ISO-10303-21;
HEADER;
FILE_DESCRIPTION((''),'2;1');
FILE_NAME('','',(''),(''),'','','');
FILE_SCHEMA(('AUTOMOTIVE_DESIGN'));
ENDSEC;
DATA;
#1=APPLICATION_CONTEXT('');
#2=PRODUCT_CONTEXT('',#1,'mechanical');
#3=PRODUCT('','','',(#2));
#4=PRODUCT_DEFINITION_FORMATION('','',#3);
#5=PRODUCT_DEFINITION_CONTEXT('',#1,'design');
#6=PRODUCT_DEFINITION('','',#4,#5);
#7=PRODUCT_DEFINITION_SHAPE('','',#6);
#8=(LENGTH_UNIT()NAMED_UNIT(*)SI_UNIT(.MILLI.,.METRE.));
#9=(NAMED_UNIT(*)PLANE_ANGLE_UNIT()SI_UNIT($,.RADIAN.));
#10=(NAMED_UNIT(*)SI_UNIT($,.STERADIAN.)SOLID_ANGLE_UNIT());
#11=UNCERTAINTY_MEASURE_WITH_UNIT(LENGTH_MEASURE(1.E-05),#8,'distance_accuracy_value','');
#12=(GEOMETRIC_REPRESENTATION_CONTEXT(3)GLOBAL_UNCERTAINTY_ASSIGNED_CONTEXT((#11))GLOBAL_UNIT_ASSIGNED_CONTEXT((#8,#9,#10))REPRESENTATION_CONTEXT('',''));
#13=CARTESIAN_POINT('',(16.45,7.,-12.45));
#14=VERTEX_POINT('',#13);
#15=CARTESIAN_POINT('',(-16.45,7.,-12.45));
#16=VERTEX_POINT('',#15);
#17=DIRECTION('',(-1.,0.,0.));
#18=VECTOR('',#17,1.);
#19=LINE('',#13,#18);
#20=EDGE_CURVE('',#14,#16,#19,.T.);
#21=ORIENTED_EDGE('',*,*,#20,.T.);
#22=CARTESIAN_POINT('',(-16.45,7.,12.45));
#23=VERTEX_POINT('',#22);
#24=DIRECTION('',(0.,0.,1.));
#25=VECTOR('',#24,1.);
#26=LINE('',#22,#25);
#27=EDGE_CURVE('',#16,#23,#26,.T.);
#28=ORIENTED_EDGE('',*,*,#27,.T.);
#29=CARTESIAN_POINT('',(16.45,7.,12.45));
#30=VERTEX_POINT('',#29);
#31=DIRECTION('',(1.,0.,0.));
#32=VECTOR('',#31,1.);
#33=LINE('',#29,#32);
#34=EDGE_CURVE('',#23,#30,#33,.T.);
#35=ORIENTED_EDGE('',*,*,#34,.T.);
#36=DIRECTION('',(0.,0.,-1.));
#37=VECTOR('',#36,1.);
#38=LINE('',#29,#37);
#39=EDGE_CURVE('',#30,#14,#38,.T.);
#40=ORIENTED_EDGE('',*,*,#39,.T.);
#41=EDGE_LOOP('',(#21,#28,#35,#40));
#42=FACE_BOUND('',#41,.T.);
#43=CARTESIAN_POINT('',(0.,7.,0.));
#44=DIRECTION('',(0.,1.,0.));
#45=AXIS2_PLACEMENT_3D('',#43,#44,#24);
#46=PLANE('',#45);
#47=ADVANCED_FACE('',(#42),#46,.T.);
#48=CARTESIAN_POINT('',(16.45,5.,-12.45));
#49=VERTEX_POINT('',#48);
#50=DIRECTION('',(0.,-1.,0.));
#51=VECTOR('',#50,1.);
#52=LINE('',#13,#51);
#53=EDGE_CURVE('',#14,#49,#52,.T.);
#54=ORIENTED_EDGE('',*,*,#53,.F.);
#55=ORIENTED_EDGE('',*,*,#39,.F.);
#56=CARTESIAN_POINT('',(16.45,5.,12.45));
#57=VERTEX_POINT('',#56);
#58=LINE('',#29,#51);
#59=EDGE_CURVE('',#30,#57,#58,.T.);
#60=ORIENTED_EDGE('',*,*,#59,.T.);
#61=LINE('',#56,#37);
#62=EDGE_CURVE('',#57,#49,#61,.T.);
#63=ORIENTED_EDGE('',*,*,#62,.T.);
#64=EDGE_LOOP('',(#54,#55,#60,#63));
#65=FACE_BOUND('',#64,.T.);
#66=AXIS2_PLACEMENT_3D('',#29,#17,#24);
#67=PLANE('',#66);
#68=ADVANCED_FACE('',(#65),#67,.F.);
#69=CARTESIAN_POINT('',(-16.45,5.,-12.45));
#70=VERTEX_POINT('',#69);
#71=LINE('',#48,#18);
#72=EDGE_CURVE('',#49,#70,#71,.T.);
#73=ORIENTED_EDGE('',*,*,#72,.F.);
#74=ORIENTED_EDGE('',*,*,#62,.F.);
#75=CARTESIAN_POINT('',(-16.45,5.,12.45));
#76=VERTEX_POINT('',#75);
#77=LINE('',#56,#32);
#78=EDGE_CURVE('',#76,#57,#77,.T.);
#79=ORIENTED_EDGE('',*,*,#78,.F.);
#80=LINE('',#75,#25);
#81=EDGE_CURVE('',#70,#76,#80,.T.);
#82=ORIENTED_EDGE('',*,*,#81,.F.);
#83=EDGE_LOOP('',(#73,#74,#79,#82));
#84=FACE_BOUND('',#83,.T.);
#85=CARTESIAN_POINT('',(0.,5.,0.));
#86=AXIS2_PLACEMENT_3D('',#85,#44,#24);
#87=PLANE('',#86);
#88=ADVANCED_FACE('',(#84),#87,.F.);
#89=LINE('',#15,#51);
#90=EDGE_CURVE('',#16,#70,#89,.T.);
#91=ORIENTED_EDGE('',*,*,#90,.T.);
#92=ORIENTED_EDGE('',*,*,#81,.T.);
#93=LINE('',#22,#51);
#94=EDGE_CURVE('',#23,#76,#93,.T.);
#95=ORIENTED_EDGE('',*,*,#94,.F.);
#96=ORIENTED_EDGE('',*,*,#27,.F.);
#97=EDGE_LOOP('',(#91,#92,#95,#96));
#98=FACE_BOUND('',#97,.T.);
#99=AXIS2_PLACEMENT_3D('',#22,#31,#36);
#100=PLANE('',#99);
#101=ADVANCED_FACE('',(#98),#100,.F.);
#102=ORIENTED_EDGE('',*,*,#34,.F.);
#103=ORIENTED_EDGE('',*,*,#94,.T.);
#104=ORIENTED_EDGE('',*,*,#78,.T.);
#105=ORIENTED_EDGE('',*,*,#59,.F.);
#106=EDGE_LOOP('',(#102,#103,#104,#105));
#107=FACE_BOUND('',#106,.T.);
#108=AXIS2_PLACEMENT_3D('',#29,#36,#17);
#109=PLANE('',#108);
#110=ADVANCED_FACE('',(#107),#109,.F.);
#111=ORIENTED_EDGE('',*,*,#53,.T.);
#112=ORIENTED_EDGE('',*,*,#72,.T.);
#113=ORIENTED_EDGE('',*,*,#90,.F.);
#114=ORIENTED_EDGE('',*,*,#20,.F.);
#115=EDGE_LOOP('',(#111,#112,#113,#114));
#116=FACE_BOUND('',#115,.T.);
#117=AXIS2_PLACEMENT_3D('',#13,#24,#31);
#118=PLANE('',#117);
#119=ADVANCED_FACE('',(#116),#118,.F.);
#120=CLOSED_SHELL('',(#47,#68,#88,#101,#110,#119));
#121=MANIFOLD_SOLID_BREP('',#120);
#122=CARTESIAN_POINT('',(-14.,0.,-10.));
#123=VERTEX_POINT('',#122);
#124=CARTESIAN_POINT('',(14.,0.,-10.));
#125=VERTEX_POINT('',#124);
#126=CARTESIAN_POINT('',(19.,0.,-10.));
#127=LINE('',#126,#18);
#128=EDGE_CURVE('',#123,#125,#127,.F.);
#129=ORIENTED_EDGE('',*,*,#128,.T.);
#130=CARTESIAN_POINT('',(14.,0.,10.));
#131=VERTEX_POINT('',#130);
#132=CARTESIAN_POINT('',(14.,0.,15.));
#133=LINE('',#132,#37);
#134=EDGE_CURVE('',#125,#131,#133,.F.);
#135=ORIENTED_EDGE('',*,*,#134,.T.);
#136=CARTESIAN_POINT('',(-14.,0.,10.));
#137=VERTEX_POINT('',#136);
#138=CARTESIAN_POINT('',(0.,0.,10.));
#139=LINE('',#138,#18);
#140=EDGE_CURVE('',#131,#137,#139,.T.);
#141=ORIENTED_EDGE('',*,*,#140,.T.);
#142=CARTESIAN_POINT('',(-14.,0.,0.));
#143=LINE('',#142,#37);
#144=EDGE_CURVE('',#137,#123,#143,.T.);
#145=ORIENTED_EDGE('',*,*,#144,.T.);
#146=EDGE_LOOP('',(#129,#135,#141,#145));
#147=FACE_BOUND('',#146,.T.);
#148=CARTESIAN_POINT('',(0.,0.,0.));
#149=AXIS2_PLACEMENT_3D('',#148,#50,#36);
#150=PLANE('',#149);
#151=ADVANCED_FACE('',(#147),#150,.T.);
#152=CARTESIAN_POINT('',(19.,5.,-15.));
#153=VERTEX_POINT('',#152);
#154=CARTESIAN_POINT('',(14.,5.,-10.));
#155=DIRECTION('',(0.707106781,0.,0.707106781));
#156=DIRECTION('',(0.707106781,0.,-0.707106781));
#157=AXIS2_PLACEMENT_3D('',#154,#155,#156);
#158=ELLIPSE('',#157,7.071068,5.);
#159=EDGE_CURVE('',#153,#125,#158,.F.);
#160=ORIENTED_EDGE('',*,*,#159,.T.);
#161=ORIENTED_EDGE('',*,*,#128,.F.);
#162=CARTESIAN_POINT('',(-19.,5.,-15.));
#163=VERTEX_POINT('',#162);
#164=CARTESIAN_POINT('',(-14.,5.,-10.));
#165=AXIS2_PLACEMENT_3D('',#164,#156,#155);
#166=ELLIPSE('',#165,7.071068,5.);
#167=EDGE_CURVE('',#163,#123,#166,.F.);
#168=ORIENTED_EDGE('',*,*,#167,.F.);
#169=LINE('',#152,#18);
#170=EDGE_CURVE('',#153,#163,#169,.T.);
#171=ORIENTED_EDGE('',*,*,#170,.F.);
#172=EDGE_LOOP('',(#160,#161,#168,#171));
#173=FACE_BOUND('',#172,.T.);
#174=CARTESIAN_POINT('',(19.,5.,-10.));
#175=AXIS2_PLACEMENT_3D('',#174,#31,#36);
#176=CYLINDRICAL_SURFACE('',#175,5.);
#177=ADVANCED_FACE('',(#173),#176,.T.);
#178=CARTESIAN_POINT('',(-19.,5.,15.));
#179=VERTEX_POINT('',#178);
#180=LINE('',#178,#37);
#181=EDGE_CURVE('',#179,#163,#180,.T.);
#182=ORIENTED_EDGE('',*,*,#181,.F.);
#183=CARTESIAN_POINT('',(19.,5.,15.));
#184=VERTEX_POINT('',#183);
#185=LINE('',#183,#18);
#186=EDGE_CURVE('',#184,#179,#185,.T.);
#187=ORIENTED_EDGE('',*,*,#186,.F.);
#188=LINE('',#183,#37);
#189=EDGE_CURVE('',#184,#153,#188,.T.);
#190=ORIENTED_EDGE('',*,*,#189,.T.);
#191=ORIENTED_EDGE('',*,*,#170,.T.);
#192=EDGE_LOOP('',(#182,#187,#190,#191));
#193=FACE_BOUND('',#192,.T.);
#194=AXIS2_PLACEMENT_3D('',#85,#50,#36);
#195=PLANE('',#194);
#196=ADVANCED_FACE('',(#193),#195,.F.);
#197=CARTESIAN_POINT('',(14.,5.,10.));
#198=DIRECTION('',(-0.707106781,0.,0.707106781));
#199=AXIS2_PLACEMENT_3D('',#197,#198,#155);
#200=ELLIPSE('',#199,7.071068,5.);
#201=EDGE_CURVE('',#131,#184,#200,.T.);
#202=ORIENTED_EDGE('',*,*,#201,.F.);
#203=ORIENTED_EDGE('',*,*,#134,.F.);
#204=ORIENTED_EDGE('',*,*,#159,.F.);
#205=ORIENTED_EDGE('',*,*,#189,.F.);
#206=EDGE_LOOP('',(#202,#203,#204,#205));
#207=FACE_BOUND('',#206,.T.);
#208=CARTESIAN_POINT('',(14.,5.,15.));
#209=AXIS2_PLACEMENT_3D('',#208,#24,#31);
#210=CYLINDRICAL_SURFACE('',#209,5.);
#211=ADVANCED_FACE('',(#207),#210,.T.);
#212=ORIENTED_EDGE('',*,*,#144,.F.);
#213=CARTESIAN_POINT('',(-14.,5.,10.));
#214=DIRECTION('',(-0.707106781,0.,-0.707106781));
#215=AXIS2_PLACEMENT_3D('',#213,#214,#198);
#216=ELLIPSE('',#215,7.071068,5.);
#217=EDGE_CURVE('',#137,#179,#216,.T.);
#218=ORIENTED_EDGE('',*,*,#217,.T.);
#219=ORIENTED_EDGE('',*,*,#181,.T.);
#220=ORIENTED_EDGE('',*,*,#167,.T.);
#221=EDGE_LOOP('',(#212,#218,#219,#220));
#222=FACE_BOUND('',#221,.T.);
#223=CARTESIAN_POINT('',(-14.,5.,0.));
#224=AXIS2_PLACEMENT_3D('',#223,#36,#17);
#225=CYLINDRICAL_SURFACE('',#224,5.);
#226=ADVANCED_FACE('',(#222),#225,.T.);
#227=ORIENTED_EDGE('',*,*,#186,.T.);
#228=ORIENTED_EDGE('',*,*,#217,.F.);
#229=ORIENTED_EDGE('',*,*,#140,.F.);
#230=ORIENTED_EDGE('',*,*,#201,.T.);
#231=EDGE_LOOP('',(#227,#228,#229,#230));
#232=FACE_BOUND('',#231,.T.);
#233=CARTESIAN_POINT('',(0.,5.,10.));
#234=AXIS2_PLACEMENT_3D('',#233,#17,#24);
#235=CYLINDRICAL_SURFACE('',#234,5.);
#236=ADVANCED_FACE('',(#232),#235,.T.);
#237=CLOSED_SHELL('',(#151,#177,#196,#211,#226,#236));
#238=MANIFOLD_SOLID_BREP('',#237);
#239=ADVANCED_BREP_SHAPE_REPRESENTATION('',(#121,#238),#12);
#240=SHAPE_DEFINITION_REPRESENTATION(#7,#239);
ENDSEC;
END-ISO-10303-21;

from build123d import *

# Parameters (mm, degrees)
SKETCH1_W           = 38
SKETCH1_H           = 30
BOSS_EXTRUDE1_DEPTH = 5
SKETCH2_W           = 32.9
SKETCH2_H           = 24.9
BOSS_EXTRUDE2_DEPTH = 2
FILLET1_R           = 5


with BuildPart() as part:
    # Sketch1 → Boss-Extrude1 (new body)
    with BuildSketch(Plane(origin=(0, 0, 0), x_dir=(1, 0, 0), z_dir=(0, 1, 0))):
        Rectangle(SKETCH1_W, SKETCH1_H)
    extrude(amount=BOSS_EXTRUDE1_DEPTH)

    # Fillet1
    fillet1_edges = [part.edges().sort_by_distance(p)[0] for p in [
        (-19, 0, 0),
        (0, 0, 15),
        (19, 0, 0),
        (0, 0, -15),
    ]]
    fillet(fillet1_edges, radius=FILLET1_R - 0.0001)  # a hair under: the kernel refuses the full size


with BuildPart() as body_2:
    # Sketch2 → Boss-Extrude2 (new body)
    with BuildSketch(Plane(origin=(0, 5, 0), x_dir=(1, 0, 0), z_dir=(0, 1, 0))):
        Rectangle(SKETCH2_W, SKETCH2_H)
    extrude(amount=BOSS_EXTRUDE2_DEPTH)


solid = Compound([part.part, body_2.part])
